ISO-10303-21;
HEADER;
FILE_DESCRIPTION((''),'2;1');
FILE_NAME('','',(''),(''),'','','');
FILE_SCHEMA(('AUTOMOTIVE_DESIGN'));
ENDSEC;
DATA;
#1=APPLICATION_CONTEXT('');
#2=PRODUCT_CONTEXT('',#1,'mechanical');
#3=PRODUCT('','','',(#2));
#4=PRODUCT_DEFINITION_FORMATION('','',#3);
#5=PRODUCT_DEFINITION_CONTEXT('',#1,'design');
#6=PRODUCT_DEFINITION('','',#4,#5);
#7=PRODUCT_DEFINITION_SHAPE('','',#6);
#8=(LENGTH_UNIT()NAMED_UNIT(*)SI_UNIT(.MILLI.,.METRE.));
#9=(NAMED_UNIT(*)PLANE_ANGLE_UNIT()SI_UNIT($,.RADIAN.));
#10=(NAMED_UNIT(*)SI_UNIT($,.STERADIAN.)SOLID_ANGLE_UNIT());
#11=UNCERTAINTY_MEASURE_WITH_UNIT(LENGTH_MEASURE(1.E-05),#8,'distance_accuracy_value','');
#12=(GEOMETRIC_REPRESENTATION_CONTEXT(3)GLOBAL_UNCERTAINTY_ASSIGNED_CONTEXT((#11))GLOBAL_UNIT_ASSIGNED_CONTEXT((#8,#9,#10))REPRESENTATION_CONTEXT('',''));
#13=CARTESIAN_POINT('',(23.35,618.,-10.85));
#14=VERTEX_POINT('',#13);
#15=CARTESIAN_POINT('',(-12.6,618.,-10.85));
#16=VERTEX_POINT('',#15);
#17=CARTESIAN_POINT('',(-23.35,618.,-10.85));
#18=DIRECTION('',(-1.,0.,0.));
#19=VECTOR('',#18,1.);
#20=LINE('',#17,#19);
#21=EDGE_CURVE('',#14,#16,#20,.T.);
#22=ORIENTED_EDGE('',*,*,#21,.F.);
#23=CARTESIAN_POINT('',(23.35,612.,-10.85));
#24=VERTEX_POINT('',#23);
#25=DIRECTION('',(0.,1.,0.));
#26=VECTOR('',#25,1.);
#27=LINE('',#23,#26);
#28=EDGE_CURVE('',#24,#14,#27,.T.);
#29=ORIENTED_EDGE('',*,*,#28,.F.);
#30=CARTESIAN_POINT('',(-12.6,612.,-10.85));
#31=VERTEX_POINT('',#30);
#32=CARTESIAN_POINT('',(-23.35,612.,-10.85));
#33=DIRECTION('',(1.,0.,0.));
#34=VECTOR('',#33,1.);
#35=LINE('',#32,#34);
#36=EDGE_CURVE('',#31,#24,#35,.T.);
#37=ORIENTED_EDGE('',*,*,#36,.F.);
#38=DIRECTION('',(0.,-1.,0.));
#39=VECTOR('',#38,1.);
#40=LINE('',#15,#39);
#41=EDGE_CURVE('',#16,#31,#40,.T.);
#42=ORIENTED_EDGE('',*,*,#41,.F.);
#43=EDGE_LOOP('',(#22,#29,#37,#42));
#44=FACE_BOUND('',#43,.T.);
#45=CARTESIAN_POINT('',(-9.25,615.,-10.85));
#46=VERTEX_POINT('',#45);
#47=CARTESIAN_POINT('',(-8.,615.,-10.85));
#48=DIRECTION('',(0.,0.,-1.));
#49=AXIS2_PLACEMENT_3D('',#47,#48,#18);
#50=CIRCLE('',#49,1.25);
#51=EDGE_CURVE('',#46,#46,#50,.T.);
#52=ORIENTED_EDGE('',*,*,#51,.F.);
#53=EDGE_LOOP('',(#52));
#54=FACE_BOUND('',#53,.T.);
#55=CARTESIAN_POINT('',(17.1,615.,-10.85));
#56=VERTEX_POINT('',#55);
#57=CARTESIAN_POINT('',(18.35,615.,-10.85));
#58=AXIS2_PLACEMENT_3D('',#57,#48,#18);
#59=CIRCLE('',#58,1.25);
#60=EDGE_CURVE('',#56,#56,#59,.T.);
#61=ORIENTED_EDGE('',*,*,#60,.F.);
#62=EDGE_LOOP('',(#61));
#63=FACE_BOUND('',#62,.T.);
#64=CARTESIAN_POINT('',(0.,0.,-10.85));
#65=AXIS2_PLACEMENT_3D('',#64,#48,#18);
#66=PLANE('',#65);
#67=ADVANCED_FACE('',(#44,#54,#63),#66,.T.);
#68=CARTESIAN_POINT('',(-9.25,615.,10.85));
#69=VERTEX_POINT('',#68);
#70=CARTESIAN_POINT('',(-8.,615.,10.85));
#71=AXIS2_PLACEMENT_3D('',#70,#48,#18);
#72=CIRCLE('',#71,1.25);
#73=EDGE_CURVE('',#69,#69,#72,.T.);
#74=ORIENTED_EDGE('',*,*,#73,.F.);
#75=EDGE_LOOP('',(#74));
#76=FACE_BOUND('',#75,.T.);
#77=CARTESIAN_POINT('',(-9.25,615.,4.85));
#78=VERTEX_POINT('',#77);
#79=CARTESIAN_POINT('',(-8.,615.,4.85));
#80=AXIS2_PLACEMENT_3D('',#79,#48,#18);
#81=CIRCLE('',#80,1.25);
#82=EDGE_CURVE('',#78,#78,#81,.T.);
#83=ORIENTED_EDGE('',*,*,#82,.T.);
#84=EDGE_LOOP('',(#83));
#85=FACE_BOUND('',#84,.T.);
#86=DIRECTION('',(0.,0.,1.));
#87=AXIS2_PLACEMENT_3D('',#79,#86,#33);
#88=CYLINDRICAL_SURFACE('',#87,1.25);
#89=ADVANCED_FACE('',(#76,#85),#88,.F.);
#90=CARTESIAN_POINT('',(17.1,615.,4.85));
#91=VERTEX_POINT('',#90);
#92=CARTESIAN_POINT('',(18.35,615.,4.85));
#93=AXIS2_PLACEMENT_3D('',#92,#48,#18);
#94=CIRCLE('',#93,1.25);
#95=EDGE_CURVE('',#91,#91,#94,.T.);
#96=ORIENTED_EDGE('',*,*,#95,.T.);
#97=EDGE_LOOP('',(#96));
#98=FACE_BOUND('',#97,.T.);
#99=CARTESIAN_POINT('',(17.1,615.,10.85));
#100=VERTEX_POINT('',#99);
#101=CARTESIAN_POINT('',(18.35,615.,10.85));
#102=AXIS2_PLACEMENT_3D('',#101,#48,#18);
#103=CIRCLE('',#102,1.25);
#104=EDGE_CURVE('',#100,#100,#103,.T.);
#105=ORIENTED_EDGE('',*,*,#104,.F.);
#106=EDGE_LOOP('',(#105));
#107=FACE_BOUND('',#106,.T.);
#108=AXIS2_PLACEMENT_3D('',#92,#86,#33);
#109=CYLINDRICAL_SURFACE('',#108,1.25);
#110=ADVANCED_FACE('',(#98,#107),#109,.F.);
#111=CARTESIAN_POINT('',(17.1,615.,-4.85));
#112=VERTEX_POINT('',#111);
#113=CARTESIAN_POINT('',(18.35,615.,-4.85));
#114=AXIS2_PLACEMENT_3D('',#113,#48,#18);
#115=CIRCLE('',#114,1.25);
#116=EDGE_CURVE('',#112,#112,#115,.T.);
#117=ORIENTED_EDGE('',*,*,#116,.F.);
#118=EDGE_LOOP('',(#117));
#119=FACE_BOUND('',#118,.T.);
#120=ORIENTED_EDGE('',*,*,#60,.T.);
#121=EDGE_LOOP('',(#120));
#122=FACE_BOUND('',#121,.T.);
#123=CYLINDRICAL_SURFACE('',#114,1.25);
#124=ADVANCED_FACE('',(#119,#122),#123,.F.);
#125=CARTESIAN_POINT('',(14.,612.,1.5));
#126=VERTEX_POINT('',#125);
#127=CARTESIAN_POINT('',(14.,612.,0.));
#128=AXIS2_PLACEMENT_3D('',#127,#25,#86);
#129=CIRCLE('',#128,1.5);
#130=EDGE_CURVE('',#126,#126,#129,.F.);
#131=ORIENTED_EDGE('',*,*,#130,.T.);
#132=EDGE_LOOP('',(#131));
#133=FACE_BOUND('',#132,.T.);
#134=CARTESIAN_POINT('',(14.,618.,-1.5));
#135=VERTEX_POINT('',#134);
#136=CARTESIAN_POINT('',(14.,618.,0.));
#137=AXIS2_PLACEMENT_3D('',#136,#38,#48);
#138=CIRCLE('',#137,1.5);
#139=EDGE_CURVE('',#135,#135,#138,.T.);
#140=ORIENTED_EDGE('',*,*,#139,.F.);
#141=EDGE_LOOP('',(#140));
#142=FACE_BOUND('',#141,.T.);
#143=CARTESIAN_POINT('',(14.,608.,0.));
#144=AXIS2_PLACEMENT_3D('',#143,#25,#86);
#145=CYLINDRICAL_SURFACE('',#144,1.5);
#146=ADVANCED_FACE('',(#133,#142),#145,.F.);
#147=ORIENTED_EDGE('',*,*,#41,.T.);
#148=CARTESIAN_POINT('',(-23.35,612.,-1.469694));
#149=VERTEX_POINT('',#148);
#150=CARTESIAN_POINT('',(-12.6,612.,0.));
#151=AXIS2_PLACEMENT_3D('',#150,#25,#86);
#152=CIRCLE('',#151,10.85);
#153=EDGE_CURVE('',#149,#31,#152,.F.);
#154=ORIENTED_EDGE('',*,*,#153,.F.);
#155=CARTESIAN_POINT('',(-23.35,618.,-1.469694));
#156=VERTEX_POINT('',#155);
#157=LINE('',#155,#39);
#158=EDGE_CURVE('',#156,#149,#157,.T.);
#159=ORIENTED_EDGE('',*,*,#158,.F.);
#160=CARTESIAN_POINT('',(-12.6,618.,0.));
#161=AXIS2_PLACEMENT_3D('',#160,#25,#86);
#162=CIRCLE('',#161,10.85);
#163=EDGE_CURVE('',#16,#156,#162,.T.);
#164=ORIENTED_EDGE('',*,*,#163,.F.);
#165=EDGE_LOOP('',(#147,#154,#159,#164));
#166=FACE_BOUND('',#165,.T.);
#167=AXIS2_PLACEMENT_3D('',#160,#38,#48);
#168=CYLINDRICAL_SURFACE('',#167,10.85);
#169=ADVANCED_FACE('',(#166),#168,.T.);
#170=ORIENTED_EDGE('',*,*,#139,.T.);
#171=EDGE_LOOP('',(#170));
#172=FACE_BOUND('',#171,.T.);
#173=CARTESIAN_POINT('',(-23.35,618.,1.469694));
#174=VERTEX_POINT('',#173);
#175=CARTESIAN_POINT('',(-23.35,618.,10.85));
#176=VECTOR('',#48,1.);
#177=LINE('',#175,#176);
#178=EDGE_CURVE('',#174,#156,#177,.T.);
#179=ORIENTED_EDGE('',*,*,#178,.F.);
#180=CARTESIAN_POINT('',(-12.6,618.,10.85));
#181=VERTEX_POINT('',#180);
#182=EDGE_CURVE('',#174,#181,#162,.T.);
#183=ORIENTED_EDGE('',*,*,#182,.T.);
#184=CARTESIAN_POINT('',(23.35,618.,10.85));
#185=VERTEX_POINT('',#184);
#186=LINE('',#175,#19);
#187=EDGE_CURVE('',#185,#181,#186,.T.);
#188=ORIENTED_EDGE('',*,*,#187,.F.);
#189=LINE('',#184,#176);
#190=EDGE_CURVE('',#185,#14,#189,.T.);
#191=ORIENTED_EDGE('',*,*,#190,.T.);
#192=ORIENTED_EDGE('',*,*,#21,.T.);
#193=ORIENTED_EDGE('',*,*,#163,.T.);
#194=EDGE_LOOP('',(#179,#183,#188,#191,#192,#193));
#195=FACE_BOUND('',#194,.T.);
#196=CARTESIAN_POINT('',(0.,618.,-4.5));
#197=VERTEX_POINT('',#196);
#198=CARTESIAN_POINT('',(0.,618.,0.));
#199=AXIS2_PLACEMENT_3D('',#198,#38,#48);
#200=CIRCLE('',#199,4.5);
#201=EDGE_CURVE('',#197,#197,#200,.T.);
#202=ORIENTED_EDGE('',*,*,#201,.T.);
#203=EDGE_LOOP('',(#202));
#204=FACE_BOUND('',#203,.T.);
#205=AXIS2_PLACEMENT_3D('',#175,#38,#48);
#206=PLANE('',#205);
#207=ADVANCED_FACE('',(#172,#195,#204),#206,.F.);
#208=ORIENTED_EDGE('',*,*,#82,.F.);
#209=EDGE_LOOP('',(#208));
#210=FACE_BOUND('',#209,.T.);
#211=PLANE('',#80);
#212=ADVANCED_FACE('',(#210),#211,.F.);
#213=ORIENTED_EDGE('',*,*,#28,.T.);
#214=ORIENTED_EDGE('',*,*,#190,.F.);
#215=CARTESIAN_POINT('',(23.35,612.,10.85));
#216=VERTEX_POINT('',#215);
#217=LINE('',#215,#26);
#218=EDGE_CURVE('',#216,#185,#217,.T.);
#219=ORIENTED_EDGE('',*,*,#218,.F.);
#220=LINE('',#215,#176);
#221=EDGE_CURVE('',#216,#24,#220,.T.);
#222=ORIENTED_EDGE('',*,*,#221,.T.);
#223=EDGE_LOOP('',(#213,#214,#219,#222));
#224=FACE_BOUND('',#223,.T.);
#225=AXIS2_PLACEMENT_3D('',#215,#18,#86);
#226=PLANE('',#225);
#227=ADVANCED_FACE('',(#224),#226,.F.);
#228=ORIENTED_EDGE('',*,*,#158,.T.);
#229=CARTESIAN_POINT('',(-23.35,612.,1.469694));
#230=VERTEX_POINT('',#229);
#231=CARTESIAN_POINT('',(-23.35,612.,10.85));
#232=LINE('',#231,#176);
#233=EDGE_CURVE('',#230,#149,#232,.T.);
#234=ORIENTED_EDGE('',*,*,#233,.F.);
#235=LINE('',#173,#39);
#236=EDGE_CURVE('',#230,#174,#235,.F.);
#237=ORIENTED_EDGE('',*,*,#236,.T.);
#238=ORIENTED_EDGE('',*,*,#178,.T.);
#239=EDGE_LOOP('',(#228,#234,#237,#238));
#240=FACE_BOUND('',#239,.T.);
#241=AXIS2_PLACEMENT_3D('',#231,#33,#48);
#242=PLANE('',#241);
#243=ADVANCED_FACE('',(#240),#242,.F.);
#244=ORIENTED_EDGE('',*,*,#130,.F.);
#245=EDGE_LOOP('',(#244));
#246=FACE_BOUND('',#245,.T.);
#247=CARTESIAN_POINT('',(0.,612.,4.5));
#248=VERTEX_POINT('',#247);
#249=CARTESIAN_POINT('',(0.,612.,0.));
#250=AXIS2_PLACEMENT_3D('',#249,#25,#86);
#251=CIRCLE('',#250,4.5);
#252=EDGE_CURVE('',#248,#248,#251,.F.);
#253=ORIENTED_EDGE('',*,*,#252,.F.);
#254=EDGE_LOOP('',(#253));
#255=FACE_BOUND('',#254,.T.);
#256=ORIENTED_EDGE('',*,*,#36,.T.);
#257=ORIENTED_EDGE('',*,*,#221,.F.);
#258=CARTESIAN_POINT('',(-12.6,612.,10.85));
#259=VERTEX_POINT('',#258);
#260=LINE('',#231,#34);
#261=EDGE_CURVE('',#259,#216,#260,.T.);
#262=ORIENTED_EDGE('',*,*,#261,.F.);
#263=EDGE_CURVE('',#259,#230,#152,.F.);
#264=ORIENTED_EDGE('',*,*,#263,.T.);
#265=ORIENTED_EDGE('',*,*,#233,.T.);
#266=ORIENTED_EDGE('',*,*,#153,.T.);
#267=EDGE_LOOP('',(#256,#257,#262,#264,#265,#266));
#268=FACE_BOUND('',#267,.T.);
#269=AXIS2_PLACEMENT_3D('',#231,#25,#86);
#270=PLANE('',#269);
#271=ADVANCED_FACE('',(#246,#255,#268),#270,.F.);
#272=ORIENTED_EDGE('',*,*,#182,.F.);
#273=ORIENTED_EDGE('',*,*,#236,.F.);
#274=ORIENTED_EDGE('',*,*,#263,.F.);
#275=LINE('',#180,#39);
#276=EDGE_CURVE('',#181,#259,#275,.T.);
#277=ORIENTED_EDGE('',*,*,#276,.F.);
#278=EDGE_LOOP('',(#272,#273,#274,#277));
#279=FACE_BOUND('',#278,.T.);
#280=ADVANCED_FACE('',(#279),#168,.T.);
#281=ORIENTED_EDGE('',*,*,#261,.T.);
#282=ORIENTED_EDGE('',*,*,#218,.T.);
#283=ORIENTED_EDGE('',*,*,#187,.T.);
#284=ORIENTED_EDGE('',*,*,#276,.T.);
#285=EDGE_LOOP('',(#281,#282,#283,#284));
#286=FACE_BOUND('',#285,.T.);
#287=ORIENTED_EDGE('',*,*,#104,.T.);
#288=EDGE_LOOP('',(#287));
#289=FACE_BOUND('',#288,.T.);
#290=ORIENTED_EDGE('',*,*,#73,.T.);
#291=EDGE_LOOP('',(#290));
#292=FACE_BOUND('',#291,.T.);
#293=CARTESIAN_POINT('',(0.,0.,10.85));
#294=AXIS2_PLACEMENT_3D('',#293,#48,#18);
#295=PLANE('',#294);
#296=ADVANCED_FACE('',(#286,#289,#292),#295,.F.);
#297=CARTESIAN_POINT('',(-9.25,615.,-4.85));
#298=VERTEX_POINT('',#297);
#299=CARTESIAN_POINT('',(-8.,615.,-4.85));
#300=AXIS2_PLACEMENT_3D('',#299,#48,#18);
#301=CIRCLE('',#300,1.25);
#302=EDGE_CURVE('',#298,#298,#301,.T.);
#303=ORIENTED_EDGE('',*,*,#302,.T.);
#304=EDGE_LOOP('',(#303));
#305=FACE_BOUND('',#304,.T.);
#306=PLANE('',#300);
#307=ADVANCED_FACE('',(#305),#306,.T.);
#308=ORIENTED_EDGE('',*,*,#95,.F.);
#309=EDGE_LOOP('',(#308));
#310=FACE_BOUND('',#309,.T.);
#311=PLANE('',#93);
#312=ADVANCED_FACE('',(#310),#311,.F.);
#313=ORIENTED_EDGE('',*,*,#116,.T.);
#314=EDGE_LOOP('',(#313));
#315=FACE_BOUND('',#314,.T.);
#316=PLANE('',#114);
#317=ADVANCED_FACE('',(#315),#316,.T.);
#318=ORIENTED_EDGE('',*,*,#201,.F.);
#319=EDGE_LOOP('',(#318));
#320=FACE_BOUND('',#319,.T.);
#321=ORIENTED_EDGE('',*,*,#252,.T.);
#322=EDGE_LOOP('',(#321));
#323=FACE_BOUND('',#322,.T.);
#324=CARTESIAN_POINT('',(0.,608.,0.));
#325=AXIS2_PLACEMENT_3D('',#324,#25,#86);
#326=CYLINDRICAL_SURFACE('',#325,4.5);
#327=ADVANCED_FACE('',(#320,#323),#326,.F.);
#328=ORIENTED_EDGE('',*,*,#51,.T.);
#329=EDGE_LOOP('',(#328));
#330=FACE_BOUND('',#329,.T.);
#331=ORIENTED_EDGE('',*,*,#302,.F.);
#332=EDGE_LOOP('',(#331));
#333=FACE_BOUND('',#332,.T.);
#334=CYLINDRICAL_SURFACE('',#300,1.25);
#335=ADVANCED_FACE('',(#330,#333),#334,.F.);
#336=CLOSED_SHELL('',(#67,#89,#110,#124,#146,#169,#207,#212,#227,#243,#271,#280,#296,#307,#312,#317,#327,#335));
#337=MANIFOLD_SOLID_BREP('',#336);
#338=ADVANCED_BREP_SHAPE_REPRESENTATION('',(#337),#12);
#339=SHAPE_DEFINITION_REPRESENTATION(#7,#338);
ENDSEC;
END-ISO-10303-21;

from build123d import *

# Parameters (mm, degrees)
AUFSATZ_LINEAR_AUSTRAGEN1_DEPTH      = 10.85
AUFSATZ_LINEAR_AUSTRAGEN1_DEPTH_BACK = 10.85
SKIZZE3_W                            = 46.7
SKIZZE3_H                            = 6
SCHNITT_LINEAR_START                 = 618
SKIZZE4_R                            = 4.5
SKIZZE4_R_2                          = 1.5
SCHNITT_LINEAR_AUSTRAGEN1_DEPTH      = 10
SCHNITT_LINEAR_START_2               = 10.85
SKIZZE6_R                            = 1.25
SCHNITT_LINEAR_AUSTRAGEN2_DEPTH      = 6
SCHNITT_LINEAR_START_3               = -4.85
SKIZZE6_2_R                          = 1.25
SCHNITT_LINEAR_AUSTRAGEN3_DEPTH      = 6
SCHNITT_LINEAR_START_4               = 612
SCHNITT_LINEAR_AUSTRAGEN4_DEPTH      = 6


# Read off the part's stored shape, not the designer's step: Schnitt-Linear austragen4
with BuildPart() as part:
    # Skizze3 → Aufsatz-Linear austragen1 (new, two sides: drawn at the far end of the back side and taken through both)
    with BuildSketch(Plane.XY.offset(-AUFSATZ_LINEAR_AUSTRAGEN1_DEPTH_BACK)):
        with Locations((0, 615)):
            Rectangle(SKIZZE3_W, SKIZZE3_H)
    extrude(amount=AUFSATZ_LINEAR_AUSTRAGEN1_DEPTH + AUFSATZ_LINEAR_AUSTRAGEN1_DEPTH_BACK)

    # Skizze4 → Schnitt-Linear austragen1 (cut)
    with BuildSketch(Plane(origin=(0, 0, 0), x_dir=(1, 0, 0), z_dir=(0, 1, 0)).offset(SCHNITT_LINEAR_START)):
        with Locations(Location((0, 0, 0), (0, 0, 270))):
            Circle(SKIZZE4_R)
        with Locations(Location((14, 0, 0), (0, 0, 270))):
            Circle(SKIZZE4_R_2)
    extrude(amount=-SCHNITT_LINEAR_AUSTRAGEN1_DEPTH, mode=Mode.SUBTRACT)

    # Skizze6 → Schnitt-Linear austragen2 (cut)
    with BuildSketch(Plane.XY.offset(SCHNITT_LINEAR_START_2)):
        with Locations(Location((18.35, 615, 0), (0, 0, 180))):
            Circle(SKIZZE6_R)
        with Locations(Location((-8, 615, 0), (0, 0, 180))):
            Circle(SKIZZE6_R)
    extrude(amount=-SCHNITT_LINEAR_AUSTRAGEN2_DEPTH, mode=Mode.SUBTRACT)

    # Skizze6<2> → Schnitt-Linear austragen3 (cut)
    with BuildSketch(Plane.XY.offset(SCHNITT_LINEAR_START_3)):
        with Locations((18.35, 234)):
            Circle(SKIZZE6_2_R)
        with Locations((-8, 234)):
            Circle(SKIZZE6_2_R)
        with Locations(Location((18.35, 615, 0), (0, 0, 180))):
            Circle(SKIZZE6_2_R)
        with Locations(Location((-8, 615, 0), (0, 0, 180))):
            Circle(SKIZZE6_2_R)
    extrude(amount=-SCHNITT_LINEAR_AUSTRAGEN3_DEPTH, mode=Mode.SUBTRACT)

    # Schnitt-Linear austragen4 outline → Schnitt-Linear austragen4 (cut)
    with BuildSketch(Plane(origin=(0, 0, 0), x_dir=(1, 0, 0), z_dir=(0, 1, 0)).offset(SCHNITT_LINEAR_START_4)):
        with BuildLine():
            Line((-23.35, 10.85), (-23.35, 1.469693846))
            ThreePointArc((-23.35, 1.469693846), (-19.733593827, 8.17522716), (-12.6, 10.85))
            Line((-12.6, 10.85), (-23.35, 10.85))
        make_face()
        with BuildLine():
            ThreePointArc((-12.6, -10.85), (-19.733593827, -8.17522716), (-23.35, -1.469693846))
            Line((-23.35, -1.469693846), (-23.35, -10.85))
            Line((-23.35, -10.85), (-12.6, -10.85))
        make_face()
    extrude(amount=SCHNITT_LINEAR_AUSTRAGEN4_DEPTH, mode=Mode.SUBTRACT)


solid = part.part
